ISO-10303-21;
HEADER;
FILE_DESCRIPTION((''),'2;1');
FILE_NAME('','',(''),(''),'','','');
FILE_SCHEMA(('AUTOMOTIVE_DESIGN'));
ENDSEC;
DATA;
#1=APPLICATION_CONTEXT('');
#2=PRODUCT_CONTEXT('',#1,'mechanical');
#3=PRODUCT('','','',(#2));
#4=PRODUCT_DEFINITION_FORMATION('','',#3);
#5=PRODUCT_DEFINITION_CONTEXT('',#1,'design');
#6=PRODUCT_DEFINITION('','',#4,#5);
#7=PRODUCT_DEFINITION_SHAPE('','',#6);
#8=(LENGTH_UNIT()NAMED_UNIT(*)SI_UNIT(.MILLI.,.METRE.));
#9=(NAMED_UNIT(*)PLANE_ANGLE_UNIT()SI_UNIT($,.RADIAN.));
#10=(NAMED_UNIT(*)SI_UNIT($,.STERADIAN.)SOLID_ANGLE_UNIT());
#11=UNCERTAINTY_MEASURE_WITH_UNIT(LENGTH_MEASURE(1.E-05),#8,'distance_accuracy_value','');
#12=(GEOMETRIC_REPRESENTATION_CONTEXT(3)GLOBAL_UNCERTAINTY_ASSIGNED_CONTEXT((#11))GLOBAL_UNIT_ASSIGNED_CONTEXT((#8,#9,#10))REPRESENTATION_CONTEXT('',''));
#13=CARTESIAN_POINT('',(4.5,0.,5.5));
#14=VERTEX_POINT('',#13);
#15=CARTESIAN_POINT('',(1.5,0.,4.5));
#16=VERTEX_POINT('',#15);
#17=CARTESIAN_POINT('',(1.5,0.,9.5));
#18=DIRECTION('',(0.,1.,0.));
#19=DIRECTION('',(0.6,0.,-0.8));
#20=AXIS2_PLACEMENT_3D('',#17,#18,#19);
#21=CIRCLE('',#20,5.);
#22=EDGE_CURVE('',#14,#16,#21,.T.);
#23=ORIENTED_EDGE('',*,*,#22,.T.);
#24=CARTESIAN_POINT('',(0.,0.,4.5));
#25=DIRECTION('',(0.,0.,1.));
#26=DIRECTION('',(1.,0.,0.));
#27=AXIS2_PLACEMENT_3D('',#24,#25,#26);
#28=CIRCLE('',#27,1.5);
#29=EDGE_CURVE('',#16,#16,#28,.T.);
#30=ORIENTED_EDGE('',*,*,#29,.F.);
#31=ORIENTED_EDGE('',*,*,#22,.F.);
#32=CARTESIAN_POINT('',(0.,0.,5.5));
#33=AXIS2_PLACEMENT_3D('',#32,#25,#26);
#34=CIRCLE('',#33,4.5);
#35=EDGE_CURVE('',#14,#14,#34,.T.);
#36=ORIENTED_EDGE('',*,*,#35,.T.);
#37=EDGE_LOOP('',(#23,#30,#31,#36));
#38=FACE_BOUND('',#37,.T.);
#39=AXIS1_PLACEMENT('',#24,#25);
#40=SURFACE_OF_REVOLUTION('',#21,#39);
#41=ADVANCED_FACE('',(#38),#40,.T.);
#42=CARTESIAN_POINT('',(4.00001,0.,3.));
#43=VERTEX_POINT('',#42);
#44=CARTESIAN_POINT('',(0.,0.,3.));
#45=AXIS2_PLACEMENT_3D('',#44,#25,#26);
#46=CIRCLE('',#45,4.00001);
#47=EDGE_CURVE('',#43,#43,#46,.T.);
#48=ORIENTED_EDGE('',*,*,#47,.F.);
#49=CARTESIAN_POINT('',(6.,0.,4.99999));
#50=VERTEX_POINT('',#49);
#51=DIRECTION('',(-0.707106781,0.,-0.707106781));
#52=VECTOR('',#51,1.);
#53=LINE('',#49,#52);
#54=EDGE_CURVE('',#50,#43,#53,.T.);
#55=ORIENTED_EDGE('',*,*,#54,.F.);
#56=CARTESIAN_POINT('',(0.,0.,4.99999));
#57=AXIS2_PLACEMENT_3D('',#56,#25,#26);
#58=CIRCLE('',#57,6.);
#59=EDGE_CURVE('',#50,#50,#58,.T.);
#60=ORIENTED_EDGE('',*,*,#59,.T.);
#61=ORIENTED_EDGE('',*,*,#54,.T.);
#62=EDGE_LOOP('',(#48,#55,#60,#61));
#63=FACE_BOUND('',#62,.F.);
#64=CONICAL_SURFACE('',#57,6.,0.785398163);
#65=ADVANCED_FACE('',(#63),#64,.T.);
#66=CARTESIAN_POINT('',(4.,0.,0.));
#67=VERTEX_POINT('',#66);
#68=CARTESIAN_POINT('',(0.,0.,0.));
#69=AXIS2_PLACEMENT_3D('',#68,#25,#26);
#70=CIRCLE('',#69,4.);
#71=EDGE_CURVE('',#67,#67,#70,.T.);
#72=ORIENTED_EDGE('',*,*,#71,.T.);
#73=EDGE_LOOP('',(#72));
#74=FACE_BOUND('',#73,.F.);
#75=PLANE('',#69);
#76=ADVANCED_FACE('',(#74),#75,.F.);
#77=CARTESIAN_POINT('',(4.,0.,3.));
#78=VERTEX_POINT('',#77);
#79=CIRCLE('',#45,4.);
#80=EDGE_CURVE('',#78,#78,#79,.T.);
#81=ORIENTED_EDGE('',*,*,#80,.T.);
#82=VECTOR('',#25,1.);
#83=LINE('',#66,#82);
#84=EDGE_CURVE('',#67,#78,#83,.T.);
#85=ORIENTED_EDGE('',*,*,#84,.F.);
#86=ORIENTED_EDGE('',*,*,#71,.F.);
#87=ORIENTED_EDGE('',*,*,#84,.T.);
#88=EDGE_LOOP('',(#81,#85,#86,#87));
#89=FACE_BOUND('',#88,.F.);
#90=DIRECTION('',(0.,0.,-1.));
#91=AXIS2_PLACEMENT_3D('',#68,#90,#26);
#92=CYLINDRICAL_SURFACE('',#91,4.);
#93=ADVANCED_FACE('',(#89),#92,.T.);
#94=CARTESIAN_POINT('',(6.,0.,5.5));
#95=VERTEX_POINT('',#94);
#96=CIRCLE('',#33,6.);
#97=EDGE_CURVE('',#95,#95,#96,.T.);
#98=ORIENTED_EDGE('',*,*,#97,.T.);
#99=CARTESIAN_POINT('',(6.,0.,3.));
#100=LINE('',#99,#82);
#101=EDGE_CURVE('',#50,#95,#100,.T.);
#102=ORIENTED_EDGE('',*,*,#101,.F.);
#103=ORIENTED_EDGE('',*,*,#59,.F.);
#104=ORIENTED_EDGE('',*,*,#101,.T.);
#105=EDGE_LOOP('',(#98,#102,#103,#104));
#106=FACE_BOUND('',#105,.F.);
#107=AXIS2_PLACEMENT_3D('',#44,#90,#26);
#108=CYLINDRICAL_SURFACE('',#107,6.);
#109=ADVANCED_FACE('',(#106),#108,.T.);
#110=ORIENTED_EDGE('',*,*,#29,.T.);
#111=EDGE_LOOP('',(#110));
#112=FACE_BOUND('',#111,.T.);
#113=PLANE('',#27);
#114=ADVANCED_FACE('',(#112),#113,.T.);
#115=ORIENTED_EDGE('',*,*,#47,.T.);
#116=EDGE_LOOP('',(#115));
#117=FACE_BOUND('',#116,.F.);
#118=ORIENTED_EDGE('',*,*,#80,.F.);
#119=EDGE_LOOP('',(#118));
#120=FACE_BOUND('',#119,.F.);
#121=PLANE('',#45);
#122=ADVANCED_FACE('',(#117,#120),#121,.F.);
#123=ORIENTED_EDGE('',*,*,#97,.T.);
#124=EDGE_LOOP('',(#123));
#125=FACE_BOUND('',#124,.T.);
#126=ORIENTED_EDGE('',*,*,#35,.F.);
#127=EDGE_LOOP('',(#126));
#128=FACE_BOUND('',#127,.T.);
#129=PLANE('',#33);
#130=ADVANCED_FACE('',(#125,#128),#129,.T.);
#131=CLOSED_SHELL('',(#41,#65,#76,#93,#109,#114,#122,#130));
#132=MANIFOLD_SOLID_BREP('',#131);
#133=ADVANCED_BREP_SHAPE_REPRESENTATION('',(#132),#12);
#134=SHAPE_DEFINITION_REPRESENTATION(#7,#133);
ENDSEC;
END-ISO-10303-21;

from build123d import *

# Parameters (mm, degrees)
F0_R     = 4
F1_DEPTH = 3
F2_R     = 6
F3_DEPTH = 2.5
F4_SIZE  = 1.99999
F5_R     = 4.5
F6_DEPTH = 1


# Not quite as in the source:
# - a fillet or chamfer that OpenCascade refuses, or shapes differently, is made with other operations: its cross-section is extruded or revolved along the edge and cut away or added
# - a fillet or chamfer is up to 0.001 mm smaller than in the source, because OpenCascade refuses the exact size


with BuildPart() as f1:
    # F0 (on Top) → F1 (new body)
    with BuildSketch(Plane.XY):
        Circle(F0_R)
    extrude(amount=F1_DEPTH)

    # F2 (on face) → F3 (join)
    with BuildSketch(Plane.XY.offset(3)):
        Circle(F2_R)
    extrude(amount=F3_DEPTH)

    # F4 (size 2 in the source; OpenCascade refuses exactly that, so slightly less here)
    f4_edges = [f1.edges().sort_by_distance(p)[0] for p in [
        (-6, 0, 3),
    ]]
    chamfer(f4_edges, length=F4_SIZE)

    # F5 (on face) → F6 (cut)
    with BuildSketch(Plane.XY.offset(5.5)):
        Circle(F5_R)
    extrude(amount=-F6_DEPTH, mode=Mode.SUBTRACT)

    # F7: fillet of radius 5 on 1 edges, made by hand

    # F7_s1 → F7_t2 (revolve)
    with BuildSketch(Plane.XZ):
        with BuildLine():
            ThreePointArc((4.5, 5.5), (3.0811388301, 4.7565835097), (1.5, 4.5))
            Line((1.5, 4.5), (4.5, 4.5))
            Line((4.5, 4.5), (4.5, 5.5))
        make_face()
    revolve(axis=Axis((0, 0, 4.5), (0, 0, 1)))


solid = f1.part
